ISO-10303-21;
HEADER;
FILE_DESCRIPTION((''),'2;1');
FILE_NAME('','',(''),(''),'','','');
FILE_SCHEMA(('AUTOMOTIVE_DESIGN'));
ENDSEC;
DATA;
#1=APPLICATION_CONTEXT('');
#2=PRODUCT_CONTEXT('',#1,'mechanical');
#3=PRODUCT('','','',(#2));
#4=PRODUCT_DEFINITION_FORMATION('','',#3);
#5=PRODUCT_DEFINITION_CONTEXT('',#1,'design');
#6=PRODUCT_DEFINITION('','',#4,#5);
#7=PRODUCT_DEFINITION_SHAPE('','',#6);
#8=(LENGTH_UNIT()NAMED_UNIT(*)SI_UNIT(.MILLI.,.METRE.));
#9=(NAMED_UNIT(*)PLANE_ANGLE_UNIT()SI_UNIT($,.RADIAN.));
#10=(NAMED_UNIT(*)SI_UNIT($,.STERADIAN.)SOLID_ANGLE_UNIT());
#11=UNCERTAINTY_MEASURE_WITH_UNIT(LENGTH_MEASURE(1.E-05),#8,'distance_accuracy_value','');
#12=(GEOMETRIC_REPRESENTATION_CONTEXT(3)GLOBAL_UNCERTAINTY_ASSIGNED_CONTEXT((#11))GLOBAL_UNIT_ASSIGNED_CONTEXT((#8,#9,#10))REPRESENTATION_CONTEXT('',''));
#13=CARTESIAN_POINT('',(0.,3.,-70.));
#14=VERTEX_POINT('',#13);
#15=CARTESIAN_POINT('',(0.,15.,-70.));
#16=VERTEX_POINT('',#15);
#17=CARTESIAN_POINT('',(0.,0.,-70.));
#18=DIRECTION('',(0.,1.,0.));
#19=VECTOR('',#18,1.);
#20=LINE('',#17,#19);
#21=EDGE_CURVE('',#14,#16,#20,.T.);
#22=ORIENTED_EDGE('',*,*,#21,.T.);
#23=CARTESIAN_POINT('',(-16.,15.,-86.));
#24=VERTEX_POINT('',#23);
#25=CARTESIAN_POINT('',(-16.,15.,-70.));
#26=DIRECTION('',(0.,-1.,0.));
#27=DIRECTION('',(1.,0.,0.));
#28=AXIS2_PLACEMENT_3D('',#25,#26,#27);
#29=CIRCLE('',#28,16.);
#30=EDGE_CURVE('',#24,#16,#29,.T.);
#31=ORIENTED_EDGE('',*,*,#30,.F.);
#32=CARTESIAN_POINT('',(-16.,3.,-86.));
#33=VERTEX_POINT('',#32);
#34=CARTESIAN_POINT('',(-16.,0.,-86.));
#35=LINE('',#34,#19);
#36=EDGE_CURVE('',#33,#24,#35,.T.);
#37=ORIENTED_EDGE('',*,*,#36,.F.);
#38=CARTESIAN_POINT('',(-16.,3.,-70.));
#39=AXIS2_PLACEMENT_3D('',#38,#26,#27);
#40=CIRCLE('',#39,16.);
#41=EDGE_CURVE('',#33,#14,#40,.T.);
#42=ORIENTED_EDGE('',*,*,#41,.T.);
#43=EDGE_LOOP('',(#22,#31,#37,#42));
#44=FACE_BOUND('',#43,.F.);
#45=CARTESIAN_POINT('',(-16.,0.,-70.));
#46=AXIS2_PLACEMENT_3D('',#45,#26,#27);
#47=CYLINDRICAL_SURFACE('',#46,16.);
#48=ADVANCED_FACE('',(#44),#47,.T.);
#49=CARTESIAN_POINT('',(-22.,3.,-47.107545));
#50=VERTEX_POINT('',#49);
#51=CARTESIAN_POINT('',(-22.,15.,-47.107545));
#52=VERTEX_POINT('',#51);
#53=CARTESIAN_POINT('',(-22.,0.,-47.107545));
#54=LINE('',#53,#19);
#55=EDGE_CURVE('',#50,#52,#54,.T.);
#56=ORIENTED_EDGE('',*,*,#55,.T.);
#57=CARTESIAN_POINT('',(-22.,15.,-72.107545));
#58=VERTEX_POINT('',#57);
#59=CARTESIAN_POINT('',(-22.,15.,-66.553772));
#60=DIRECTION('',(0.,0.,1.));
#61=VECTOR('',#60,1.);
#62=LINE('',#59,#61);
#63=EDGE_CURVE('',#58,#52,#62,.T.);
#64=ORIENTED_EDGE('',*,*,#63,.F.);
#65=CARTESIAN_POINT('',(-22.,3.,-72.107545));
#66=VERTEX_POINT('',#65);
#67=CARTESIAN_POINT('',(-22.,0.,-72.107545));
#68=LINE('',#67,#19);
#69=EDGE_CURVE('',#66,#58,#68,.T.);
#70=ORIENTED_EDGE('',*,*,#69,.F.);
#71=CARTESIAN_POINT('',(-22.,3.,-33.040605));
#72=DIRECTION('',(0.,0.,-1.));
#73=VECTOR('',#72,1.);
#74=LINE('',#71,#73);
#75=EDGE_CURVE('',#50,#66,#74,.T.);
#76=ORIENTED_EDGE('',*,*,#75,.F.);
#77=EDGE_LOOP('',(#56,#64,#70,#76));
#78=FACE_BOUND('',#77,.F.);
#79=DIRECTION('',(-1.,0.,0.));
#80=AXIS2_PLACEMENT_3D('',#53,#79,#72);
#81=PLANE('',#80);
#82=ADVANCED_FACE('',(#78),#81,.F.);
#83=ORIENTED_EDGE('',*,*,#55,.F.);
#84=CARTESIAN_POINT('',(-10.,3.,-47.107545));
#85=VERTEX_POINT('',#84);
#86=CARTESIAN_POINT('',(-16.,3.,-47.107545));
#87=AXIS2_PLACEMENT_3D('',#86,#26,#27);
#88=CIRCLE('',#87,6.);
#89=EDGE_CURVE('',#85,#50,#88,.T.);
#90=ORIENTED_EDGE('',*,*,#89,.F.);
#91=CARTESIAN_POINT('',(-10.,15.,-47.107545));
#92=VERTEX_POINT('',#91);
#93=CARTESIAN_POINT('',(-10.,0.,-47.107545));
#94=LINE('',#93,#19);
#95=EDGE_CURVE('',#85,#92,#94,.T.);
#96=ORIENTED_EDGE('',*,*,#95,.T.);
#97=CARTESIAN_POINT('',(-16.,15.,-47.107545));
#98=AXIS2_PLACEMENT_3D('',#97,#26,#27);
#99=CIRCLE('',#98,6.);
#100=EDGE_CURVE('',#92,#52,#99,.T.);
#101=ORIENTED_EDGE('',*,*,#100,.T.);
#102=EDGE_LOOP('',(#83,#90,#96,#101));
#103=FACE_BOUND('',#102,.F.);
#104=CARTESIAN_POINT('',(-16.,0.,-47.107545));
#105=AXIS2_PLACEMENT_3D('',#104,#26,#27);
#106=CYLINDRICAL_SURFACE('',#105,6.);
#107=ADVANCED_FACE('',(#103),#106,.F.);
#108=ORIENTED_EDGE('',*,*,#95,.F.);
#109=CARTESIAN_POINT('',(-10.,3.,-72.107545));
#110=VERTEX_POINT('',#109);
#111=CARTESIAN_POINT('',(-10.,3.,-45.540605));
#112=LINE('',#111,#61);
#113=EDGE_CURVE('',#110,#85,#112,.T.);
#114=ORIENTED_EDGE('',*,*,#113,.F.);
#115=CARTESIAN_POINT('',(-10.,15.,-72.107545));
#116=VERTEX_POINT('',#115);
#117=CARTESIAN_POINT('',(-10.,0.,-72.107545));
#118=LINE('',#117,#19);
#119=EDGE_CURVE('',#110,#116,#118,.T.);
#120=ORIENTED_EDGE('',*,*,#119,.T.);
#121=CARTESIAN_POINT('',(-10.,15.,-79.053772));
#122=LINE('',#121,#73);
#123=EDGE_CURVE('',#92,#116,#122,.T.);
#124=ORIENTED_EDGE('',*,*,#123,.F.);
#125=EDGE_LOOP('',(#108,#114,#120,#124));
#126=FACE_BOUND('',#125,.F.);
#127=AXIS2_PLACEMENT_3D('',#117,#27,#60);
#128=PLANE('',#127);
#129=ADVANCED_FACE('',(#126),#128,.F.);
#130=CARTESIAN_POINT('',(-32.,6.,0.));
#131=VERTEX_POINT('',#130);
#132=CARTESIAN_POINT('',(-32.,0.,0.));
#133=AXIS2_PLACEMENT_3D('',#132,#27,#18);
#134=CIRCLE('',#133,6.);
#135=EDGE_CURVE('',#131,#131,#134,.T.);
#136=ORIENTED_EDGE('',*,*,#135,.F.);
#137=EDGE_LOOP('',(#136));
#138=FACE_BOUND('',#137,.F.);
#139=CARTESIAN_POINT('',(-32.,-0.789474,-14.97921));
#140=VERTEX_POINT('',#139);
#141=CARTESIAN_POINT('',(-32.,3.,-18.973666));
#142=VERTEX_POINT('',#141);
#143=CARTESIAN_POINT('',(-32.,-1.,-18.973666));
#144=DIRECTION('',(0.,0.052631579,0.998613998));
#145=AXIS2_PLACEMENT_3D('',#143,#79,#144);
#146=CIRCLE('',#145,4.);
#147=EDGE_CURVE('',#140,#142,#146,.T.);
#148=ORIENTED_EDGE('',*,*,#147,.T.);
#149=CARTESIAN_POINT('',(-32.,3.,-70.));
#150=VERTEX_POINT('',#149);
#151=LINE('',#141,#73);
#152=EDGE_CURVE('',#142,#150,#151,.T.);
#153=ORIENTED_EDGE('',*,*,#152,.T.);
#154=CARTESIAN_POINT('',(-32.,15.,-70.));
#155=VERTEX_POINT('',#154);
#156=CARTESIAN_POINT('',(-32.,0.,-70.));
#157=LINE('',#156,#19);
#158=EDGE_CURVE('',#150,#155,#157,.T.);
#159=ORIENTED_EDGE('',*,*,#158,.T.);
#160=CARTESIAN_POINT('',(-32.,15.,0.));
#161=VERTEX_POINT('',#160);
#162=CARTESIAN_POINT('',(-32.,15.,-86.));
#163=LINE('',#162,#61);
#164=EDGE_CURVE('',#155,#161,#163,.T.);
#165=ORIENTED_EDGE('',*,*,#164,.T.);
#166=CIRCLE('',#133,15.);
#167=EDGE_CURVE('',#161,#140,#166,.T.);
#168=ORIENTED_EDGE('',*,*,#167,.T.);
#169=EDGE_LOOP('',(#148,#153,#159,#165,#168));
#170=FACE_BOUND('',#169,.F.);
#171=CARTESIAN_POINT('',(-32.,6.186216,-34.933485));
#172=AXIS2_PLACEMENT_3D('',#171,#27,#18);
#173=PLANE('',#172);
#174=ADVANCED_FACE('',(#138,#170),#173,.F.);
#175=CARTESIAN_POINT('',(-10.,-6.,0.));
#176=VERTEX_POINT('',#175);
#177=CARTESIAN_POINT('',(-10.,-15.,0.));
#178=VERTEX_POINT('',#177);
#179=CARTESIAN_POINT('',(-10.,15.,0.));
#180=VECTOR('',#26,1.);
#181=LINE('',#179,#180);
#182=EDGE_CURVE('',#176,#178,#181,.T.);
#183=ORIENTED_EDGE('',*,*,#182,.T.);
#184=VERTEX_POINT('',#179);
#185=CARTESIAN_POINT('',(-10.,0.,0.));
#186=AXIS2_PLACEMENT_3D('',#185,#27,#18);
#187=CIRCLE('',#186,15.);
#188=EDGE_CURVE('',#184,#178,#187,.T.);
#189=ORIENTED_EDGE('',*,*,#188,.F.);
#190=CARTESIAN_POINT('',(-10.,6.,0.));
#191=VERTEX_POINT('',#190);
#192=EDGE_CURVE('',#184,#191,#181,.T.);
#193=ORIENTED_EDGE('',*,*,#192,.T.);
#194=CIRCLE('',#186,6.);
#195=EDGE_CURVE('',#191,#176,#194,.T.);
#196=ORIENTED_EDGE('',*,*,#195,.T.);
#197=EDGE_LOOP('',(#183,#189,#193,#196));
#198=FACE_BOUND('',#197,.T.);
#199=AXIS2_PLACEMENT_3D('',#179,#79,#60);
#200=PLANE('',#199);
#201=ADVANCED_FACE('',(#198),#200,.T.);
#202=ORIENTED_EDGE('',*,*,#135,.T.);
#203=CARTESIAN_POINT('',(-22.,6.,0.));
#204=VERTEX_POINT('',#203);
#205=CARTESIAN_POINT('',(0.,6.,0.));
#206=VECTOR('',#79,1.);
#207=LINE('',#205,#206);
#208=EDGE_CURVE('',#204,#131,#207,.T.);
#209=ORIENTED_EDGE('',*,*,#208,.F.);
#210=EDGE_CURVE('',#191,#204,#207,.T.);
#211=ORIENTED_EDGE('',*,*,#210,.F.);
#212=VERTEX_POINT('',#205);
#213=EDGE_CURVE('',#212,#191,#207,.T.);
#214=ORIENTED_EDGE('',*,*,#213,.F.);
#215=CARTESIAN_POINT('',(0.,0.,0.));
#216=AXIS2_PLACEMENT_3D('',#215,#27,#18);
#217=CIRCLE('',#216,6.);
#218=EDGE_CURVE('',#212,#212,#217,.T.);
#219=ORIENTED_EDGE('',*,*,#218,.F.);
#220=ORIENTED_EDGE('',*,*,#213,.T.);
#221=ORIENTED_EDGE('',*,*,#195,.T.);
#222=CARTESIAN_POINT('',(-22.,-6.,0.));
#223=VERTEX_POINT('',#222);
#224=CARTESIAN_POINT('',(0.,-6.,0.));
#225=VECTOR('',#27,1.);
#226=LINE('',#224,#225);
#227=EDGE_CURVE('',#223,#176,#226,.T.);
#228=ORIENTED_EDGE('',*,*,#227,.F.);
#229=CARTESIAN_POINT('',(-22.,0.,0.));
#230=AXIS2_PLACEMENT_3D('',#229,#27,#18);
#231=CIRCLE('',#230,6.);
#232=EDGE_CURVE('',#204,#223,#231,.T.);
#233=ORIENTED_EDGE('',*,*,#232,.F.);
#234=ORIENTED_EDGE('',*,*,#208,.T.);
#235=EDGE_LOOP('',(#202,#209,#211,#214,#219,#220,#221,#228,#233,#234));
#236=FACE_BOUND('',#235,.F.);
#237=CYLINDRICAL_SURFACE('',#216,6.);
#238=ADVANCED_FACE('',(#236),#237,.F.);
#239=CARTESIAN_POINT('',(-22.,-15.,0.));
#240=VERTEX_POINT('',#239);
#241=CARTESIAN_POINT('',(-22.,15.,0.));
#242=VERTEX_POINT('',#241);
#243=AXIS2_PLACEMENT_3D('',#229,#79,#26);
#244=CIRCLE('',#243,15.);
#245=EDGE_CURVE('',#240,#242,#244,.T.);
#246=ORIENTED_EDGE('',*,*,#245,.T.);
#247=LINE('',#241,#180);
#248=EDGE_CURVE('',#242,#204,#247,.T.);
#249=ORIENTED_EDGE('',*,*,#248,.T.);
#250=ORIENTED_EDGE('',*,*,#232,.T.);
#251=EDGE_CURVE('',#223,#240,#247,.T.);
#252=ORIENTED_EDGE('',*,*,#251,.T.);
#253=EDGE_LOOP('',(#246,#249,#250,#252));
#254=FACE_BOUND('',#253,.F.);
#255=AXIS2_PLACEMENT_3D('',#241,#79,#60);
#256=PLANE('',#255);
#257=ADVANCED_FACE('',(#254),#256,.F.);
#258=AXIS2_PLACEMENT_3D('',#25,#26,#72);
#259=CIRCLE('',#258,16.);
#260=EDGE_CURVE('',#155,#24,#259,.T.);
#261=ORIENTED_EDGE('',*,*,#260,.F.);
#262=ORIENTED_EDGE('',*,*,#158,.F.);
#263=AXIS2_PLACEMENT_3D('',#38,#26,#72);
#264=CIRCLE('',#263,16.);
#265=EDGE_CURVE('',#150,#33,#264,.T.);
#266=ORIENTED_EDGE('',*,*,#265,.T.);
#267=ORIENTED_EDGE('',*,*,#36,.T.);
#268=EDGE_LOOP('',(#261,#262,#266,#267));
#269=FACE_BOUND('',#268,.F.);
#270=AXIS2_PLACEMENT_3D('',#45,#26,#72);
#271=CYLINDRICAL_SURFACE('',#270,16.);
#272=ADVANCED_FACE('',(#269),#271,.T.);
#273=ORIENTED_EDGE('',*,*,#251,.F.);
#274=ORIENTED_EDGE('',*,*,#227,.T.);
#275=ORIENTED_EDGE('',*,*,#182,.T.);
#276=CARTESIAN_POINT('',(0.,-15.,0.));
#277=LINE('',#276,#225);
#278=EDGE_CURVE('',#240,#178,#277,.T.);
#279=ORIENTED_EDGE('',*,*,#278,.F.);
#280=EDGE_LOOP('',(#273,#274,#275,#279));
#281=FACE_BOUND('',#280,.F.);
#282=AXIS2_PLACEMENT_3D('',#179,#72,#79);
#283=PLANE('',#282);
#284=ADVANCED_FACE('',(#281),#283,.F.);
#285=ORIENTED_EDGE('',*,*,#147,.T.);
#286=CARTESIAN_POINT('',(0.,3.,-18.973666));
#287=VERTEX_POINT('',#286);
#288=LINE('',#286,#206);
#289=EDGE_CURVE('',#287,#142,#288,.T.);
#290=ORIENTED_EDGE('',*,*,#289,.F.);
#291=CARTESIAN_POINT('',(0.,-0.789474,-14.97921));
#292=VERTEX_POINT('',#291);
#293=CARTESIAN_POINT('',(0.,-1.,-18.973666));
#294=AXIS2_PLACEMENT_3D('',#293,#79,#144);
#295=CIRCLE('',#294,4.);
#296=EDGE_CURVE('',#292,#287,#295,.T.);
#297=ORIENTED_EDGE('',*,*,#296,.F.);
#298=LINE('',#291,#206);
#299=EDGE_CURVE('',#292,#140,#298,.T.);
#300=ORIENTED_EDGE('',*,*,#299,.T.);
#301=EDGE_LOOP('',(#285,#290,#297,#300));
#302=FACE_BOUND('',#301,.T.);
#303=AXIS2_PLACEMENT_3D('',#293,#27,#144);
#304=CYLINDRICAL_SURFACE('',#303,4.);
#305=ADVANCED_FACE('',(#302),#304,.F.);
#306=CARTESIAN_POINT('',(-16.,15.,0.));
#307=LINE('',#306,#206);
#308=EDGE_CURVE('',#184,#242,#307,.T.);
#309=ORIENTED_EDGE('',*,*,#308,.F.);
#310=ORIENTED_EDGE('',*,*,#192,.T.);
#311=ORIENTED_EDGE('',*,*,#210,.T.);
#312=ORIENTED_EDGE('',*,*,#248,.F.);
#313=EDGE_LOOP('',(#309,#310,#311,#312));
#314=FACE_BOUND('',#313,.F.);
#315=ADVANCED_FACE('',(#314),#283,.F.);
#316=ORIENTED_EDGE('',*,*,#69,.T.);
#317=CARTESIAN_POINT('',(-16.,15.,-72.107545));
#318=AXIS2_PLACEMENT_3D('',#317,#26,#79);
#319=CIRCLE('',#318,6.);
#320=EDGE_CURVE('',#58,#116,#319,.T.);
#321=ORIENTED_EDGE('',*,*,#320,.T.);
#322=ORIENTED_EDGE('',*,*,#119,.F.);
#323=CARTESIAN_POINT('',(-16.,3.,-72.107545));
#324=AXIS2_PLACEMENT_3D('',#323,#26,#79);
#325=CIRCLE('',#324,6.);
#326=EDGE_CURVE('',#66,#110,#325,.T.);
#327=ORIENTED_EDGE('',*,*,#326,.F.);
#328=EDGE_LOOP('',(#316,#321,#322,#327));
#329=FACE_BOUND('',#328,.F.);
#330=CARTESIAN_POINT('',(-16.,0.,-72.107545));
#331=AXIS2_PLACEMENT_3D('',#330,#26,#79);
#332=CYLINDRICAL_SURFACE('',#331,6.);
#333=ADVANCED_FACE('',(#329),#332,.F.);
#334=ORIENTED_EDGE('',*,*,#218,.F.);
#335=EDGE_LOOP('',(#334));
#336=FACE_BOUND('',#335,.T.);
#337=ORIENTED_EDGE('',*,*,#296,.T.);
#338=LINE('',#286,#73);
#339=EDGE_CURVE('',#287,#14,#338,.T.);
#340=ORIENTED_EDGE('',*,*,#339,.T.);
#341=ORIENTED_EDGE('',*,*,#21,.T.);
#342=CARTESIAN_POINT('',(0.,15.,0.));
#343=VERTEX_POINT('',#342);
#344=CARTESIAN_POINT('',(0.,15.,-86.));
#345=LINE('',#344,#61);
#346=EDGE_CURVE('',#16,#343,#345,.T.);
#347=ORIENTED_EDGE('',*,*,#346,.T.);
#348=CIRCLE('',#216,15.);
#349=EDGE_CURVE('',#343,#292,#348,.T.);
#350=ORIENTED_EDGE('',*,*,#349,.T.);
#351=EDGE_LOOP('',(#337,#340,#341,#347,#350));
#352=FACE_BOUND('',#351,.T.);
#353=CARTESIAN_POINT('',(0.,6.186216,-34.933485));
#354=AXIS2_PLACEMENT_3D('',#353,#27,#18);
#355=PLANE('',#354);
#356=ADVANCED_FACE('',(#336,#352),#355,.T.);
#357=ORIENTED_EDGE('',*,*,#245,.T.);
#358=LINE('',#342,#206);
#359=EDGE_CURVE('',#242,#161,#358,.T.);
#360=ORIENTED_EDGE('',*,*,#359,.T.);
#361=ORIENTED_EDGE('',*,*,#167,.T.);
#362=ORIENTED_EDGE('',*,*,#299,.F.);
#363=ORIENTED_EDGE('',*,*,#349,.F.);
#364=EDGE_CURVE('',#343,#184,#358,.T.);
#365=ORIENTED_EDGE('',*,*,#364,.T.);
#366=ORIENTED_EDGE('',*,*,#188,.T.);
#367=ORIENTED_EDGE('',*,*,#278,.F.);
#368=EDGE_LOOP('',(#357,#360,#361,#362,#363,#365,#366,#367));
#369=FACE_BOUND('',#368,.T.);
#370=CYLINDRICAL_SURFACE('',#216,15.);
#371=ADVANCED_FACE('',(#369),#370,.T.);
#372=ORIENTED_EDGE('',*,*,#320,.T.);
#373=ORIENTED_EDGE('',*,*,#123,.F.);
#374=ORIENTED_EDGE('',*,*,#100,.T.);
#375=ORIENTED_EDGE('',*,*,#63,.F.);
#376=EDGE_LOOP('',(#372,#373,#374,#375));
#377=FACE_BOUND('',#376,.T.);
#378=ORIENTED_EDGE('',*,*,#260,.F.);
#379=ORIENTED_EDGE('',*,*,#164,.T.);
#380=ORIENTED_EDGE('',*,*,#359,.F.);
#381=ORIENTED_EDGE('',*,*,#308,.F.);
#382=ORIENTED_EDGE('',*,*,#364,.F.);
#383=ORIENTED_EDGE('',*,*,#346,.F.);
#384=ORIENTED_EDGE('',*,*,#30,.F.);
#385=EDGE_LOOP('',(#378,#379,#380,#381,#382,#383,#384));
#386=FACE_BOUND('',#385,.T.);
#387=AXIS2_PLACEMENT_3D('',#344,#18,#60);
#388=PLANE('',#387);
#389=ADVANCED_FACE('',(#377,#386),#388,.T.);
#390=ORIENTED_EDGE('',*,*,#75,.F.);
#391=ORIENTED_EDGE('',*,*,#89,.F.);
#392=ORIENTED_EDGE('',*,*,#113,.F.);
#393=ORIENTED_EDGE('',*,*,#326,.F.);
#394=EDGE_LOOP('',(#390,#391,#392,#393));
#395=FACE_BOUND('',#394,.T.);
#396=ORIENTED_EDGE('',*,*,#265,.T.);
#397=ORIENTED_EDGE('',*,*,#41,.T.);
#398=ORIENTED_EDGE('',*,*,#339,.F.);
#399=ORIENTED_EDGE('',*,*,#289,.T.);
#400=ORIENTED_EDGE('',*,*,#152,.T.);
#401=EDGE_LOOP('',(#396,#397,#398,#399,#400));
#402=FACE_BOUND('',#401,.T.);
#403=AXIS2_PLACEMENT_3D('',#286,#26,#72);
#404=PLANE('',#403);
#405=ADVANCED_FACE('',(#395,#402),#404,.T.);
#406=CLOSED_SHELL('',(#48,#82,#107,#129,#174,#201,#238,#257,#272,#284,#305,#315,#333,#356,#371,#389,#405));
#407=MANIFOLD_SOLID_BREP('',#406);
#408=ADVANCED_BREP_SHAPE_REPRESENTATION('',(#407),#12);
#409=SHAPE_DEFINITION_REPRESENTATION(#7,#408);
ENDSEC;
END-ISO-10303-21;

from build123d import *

# Parameters (mm, degrees)
F0_R     = 6
F1_DEPTH = 32
F3_DEPTH = 15.001
F4_W     = 12
F4_H     = 15
F5_DEPTH = 30.001


# Not quite as in the source:
# - a feature names something its author has since deleted; it is built from what else it names


with BuildPart() as f1:
    # F0 (on Right) → F1 (new body)
    with BuildSketch(Plane.YZ):
        with BuildLine():
            Line((15, -86), (15, 0))
            ThreePointArc((15, 0), (-10.3237080242, 10.8821437517), (-0.7894736842, -14.9792099692))
            ThreePointArc((-0.7894736842, -14.9792099692), (1.9019050004, -16.2206771546), (3, -18.973665961))
            Line((3, -18.973665961), (3, -86))
            Line((3, -86), (15, -86))
        make_face()
        Circle(F0_R, mode=Mode.SUBTRACT)
    extrude(amount=-F1_DEPTH)

    # F2 (on Front) → F3 (cut, through all)
    with BuildSketch(Plane.XZ):
        with BuildLine():
            ThreePointArc((-16, -86), (-27.313708499, -81.313708499), (-32, -70))
            Line((-32, -70), (-32, -86))
            Line((-32, -86), (-16, -86))
        make_face()
        with BuildLine():
            ThreePointArc((0, -70), (-4.686291501, -81.313708499), (-16, -86))
            Line((-16, -86), (0, -86))
            Line((0, -86), (0, -70))
        make_face()
        with BuildLine():
            Line((-10, -72.1075447824), (-10, -47.1075447824))
            ThreePointArc((-10, -47.1075447824), (-16, -41.1075447824), (-22, -47.1075447824))
            Line((-22, -47.1075447824), (-22, -72.1075447824))
            ThreePointArc((-22, -72.1075447824), (-16, -78.1075447824), (-10, -72.1075447824))
        make_face()
    extrude(amount=-F3_DEPTH, mode=Mode.SUBTRACT)

    # F4 (on face) → F5 (cut, through all)
    with BuildSketch(Plane(origin=(0, 15, 0), x_dir=(-1, 0, 0), z_dir=(0, 1, 0))):
        with Locations((16, 7.5)):
            Rectangle(F4_W, F4_H)
    extrude(amount=-F5_DEPTH, mode=Mode.SUBTRACT)


solid = f1.part
